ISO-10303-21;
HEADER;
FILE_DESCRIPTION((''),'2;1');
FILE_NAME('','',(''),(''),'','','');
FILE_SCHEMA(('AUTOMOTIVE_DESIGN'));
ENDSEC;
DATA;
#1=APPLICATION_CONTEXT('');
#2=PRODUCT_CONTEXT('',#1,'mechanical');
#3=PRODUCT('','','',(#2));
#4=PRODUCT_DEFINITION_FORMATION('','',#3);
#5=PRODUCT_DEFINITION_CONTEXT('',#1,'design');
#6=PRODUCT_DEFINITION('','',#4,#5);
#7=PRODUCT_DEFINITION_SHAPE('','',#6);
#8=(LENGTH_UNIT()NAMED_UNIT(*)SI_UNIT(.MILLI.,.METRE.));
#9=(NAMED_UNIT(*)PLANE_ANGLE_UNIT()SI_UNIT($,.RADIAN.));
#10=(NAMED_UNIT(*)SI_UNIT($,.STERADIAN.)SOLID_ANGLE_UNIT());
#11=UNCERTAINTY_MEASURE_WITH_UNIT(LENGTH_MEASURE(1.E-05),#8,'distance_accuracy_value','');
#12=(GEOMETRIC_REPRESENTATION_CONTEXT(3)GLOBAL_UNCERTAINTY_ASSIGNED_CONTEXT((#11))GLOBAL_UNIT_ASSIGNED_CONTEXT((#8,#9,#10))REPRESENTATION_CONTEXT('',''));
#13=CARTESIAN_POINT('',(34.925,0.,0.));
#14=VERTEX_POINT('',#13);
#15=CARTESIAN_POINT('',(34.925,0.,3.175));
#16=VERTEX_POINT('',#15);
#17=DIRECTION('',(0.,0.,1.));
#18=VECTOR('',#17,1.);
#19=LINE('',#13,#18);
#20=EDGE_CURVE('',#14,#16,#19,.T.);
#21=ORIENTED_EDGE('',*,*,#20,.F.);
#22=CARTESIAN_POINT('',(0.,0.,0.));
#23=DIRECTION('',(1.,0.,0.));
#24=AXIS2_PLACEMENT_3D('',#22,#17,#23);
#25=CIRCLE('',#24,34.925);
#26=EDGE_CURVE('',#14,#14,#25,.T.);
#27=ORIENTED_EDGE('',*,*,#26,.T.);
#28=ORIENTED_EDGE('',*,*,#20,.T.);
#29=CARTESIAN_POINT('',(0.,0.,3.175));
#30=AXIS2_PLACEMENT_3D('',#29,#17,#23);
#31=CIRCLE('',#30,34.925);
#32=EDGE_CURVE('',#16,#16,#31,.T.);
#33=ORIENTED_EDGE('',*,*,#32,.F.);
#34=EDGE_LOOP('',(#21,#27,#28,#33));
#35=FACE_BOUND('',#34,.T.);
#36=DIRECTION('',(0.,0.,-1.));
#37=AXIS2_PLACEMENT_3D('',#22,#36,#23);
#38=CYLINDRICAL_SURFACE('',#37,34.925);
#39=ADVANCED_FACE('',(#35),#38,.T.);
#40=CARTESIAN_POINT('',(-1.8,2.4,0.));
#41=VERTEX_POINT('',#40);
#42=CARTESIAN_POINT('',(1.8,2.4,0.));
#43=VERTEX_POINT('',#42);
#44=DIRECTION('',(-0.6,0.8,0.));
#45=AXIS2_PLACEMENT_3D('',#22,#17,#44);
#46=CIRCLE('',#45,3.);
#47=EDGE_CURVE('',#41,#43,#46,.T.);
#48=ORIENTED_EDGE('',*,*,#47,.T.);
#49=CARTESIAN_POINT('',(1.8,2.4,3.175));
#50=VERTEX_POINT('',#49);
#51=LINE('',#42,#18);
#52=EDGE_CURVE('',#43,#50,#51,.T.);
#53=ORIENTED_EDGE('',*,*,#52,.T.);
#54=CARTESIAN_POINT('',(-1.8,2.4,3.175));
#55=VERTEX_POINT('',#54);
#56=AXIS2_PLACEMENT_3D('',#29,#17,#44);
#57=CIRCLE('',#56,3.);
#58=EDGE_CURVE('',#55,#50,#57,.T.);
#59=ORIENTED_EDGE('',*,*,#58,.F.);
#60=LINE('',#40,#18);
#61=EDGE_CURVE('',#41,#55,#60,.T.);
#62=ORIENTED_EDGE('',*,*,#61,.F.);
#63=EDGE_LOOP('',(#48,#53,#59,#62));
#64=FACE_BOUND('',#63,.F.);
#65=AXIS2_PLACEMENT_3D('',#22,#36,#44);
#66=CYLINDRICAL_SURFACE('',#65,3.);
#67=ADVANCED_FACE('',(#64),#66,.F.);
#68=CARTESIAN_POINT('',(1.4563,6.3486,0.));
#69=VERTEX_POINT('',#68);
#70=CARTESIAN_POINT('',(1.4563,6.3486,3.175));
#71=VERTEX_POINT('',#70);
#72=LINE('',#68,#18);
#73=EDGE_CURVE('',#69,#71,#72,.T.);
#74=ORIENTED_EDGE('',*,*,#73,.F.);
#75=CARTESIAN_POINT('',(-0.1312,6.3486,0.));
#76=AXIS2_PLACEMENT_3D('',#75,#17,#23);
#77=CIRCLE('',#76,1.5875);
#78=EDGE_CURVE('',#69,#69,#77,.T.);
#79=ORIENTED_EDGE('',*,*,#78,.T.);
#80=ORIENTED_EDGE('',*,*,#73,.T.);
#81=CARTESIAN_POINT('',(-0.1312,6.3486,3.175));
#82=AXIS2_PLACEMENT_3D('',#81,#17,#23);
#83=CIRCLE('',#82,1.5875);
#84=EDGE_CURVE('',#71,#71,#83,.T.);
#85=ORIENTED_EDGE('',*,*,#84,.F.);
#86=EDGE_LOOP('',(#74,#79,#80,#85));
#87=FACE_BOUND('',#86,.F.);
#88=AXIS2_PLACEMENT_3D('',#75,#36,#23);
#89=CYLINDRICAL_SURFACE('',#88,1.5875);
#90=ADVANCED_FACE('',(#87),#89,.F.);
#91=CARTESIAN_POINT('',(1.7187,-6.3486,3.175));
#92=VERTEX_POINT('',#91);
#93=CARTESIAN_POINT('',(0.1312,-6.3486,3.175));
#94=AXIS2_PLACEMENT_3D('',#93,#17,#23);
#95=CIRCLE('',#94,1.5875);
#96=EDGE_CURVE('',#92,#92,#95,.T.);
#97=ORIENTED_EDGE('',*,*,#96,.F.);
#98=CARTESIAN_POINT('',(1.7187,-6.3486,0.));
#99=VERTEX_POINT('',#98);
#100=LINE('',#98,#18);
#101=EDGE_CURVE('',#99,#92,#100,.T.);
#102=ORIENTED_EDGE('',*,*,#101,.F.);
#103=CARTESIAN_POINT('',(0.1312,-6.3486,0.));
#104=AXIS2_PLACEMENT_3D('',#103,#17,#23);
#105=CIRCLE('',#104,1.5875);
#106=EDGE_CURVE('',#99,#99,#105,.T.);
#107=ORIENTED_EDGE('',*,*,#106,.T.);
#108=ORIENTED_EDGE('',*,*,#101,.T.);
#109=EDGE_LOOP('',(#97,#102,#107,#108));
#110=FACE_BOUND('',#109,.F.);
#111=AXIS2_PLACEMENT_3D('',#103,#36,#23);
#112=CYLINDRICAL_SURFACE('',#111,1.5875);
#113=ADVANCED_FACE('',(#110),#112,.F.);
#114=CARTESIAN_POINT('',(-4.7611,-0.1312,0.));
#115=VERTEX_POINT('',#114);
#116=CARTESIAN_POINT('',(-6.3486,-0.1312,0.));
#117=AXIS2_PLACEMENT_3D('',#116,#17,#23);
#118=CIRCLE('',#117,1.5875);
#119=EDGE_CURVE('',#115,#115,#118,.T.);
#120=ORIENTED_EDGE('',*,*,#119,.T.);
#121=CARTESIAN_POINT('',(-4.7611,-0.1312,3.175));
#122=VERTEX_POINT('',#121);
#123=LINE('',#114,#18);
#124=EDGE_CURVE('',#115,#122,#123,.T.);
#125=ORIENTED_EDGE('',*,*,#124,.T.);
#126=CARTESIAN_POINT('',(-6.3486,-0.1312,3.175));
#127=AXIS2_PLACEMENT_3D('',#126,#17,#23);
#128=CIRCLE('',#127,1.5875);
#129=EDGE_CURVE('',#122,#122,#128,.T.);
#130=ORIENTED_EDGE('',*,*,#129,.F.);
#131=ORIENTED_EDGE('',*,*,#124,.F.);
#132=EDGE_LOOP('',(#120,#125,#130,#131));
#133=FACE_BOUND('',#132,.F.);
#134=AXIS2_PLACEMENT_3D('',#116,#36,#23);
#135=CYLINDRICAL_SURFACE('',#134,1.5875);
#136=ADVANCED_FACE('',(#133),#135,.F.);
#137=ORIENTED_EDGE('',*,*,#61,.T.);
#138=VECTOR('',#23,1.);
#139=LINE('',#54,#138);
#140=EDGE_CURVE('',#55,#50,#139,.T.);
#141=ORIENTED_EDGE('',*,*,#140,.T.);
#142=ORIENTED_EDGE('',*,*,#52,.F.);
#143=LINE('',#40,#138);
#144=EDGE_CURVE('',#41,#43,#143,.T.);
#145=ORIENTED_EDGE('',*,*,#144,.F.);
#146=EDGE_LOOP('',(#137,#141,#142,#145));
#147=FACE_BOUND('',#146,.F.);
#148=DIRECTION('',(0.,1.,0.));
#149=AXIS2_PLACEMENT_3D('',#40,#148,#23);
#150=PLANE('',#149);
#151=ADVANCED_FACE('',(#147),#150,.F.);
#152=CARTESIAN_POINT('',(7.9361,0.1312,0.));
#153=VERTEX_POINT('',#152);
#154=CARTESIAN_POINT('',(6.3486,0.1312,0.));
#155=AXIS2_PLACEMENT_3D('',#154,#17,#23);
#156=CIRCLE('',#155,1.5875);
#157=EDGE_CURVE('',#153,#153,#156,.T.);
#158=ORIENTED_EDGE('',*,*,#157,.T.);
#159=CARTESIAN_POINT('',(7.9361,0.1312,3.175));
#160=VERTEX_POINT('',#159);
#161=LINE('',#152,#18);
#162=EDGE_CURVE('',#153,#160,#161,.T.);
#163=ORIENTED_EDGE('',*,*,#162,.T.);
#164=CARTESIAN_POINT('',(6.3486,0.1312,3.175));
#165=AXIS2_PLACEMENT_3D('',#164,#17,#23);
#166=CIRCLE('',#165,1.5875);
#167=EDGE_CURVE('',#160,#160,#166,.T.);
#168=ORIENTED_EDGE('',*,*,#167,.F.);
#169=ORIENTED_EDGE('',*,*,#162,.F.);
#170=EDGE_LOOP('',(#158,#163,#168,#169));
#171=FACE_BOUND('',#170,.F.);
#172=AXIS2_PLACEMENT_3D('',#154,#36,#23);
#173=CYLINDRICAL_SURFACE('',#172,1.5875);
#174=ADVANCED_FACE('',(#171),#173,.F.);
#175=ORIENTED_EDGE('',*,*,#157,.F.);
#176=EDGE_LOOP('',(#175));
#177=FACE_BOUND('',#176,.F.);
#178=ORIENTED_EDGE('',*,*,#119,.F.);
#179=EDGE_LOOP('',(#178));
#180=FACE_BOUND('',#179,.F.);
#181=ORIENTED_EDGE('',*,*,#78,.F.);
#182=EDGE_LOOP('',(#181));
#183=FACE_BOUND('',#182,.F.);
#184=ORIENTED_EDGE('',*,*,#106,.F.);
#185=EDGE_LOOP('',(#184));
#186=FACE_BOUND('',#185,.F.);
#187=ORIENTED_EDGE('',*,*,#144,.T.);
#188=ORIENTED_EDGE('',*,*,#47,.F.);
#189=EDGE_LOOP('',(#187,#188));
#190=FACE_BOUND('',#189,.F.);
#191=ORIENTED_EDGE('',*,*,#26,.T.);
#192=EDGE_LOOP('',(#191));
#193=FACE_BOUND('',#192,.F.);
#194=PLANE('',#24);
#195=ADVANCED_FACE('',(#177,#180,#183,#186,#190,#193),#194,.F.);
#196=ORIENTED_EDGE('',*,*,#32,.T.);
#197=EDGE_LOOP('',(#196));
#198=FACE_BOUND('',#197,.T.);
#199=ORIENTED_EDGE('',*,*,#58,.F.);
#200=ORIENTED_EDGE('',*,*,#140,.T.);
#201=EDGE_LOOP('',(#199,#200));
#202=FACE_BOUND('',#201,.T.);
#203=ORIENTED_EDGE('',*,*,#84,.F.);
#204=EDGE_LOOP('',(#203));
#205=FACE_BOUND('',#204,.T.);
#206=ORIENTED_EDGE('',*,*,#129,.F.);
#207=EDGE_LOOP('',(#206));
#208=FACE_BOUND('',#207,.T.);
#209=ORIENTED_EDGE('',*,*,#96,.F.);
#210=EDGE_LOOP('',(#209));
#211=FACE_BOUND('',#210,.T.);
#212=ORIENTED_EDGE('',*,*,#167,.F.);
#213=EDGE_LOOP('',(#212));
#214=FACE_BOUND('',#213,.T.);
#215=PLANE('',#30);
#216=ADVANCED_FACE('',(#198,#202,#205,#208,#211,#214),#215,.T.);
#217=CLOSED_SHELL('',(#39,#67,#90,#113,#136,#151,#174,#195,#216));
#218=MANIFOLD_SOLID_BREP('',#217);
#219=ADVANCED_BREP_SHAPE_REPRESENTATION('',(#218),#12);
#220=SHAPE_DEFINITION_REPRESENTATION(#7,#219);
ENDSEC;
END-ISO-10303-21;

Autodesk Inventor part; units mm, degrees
ref_plane "YZ Plane" through (0, 0, 0) normal (1, 0, 0) x (0, 1, 0)
ref_plane "XZ Plane" through (0, 0, 0) normal (0, 1, 0) x (-1, 0, 0)
ref_plane "XY Plane" through (0, 0, 0) normal (0, 0, 1) x (1, 0, 0)
ref_plane "Work Plane1" through (0, 0, 0) normal (0, 0, 1) x (1, 0, 0)
sketch "Sketch1" plane through (0, 0, 0) normal (0, 0, 1) x (1, 0, 0)
  circle A0 centre (-0.1312, 6.3486) radius 1.5875
  circle A1 centre (6.3486, 0.1312) radius 1.5875
  circle A2 centre (0.1312, -6.3486) radius 1.5875
  circle A3 centre (-6.3486, -0.1312) radius 1.5875
  arc A4 (-1.8, 2.4) -> (1.8, 2.4) centre (0, 0) ccw
  arc A5 (-10.2062, 24.6399) -> (-9.5905, 18.6316) centre (10.2722, 23.7027) ccw
  arc A6 (-9.5905, 18.6316) -> (-11.0963, 17.7759) centre (0, 0) ccw
  arc A7 (-11.0963, 17.7759) -> (-15.9426, 21.3804) centre (-25.6201, 3.3086) ccw
  arc A8 (-15.9426, 21.3804) -> (-17.6537, 19.9909) centre (0, 0) ccw
  arc A9 (-17.6537, 19.9909) -> (-15.1205, 14.508) centre (2.0194, 25.7538) ccw
  arc A10 (-15.1205, 14.508) -> (-16.2669, 13.2098) centre (0, 0) ccw
  arc A11 (-16.2669, 13.2098) -> (-22.021, 15.0454) centre (-25.3062, -5.1895) ccw
  arc A12 (-22.021, 15.0454) -> (-23.1882, 13.1756) centre (0, 0) ccw
  arc A13 (-23.1882, 13.1756) -> (-19.012, 8.8123) centre (-6.4522, 25.0141) ccw
  arc A14 (-19.012, 8.8123) -> (-19.6747, 7.2122) centre (0, 0) ccw
  arc A15 (-19.6747, 7.2122) -> (-25.7131, 7.08) centre (-22.2501, -13.1252) ccw
  arc A16 (-25.7131, 7.08) -> (-26.2099, 4.9325) centre (0, 0) ccw
  arc A17 (-26.2099, 4.9325) -> (-20.8432, 2.1617) centre (-14.2247, 21.5637) ccw
  arc A18 (-20.8432, 2.1617) -> (-20.9505, 0.4331) centre (0, 0) ccw
  arc A19 (-20.9505, 0.4331) -> (-26.6187, -1.6526) centre (-16.7827, -19.6386) ccw
  arc A20 (-26.6187, -1.6526) -> (-26.3914, -3.8451) centre (0, 0) ccw
  arc A21 (-26.3914, -3.8451) -> (-20.4158, -4.7232) centre (-20.4557, 15.7766) ccw
  arc A22 (-20.4158, -4.7232) -> (-19.956, -6.393) centre (0, 0) ccw
  arc A23 (-19.956, -6.393) -> (-24.6399, -10.2062) centre (-9.4967, -24.0239) ccw
  arc A24 (-24.6399, -10.2062) -> (-23.7129, -12.2061) centre (0, 0) ccw
  arc A25 (-23.7129, -12.2061) -> (-17.7759, -11.0963) centre (-24.47, 8.2798) ccw
  arc A26 (-17.7759, -11.0963) -> (-16.7989, -12.5263) centre (0, 0) ccw
  arc A27 (-16.7989, -12.5263) -> (-19.9909, -17.6537) centre (-1.1816, -25.8058) ccw
  arc A28 (-19.9909, -17.6537) -> (-18.4648, -19.2443) centre (0, 0) ccw
  arc A29 (-18.4648, -19.2443) -> (-13.2098, -16.2669) centre (-25.8326, -0.1142) ccw
  arc A30 (-13.2098, -16.2669) -> (-11.8214, -17.3022) centre (0, 0) ccw
  arc A31 (-11.8214, -17.3022) -> (-13.1756, -23.1882) centre (7.2615, -24.7913) ccw
  arc A32 (-13.1756, -23.1882) -> (-11.2157, -24.197) centre (0, 0) ccw
  arc A33 (-11.2157, -24.197) -> (-7.2122, -19.6747) centre (-24.3958, -8.4958) ccw
  arc A34 (-7.2122, -19.6747) -> (-5.5629, -20.2031) centre (0, 0) ccw
  arc A35 (-5.5629, -20.2031) -> (-4.9325, -26.2099) centre (14.9178, -21.0902) ccw
  arc A36 (-4.9325, -26.2099) -> (-2.7512, -26.5277) centre (0, 0) ccw
  arc A37 (-2.7512, -26.5277) -> (-0.4331, -20.9505) centre (-20.3154, -15.9568) ccw
  arc A38 (-0.4331, -20.9505) -> (1.2985, -20.9147) centre (0, 0) ccw
  arc A39 (1.2985, -20.9147) -> (3.8451, -26.3914) centre (20.9575, -15.1037) ccw
  arc A40 (3.8451, -26.3914) -> (6.0114, -25.9837) centre (0, 0) ccw
  arc A41 (6.0114, -25.9837) -> (6.393, -19.956) centre (-14.0335, -21.6886) ccw
  arc A42 (6.393, -19.956) -> (8.0191, -19.3599) centre (0, 0) ccw
  arc A43 (8.0191, -19.3599) -> (12.2061, -23.7129) centre (24.7261, -7.4804) ccw
  arc A44 (12.2061, -23.7129) -> (14.1226, -22.6239) centre (0, 0) ccw
  arc A45 (14.1226, -22.6239) -> (12.5263, -16.7989) centre (-6.2308, -25.0702) ccw
  arc A46 (12.5263, -16.7989) -> (13.8708, -15.7071) centre (0, 0) ccw
  arc A47 (13.8708, -15.7071) -> (19.2443, -18.4648) centre (25.8152, 0.9534) ccw
  arc A48 (19.2443, -18.4648) -> (20.7033, -16.8125) centre (0, 0) ccw
  arc A49 (20.7033, -16.8125) -> (17.3022, -11.8214) centre (2.2471, -25.7349) ccw
  arc A50 (17.3022, -11.8214) -> (18.2193, -10.3522) centre (0, 0) ccw
  arc A51 (18.2193, -10.3522) -> (24.197, -11.2157) centre (24.1069, 9.284) ccw
  arc A52 (24.197, -11.2157) -> (25.0406, -9.1792) centre (0, 0) ccw
  arc A53 (25.0406, -9.1792) -> (20.2031, -5.5629) centre (10.4814, -23.6109) ccw
  arc A54 (20.2031, -5.5629) -> (20.5935, -3.8755) centre (0, 0) ccw
  arc A55 (20.5935, -3.8755) -> (26.5277, -2.7512) centre (19.7863, 16.6084) ccw
  arc A56 (26.5277, -2.7512) -> (26.6643, -0.5512) centre (0, 0) ccw
  arc A57 (26.6643, -0.5512) -> (20.9147, 1.2985) centre (17.58, -18.9283) ccw
  arc A58 (20.9147, 1.2985) -> (20.7361, 3.0212) centre (0, 0) ccw
  arc A59 (20.7361, 3.0212) -> (25.9837, 6.0114) centre (13.3214, 22.1331) ccw
  arc A60 (25.9837, 6.0114) -> (25.3985, 8.1366) centre (0, 0) ccw
  arc A61 (25.3985, 8.1366) -> (19.3599, 8.0191) centre (22.7734, -12.1945) ccw
  arc A62 (19.3599, 8.0191) -> (18.6316, 9.5905) centre (0, 0) ccw
  arc A63 (18.6316, 9.5905) -> (22.6239, 14.1226) centre (5.413, 25.2594) ccw
  arc A64 (22.6239, 14.1226) -> (21.3804, 15.9426) centre (0, 0) ccw
  arc A65 (21.3804, 15.9426) -> (15.7071, 13.8708) centre (25.4991, -4.1393) ccw
  arc A66 (15.7071, 13.8708) -> (14.508, 15.1205) centre (0, 0) ccw
  arc A67 (14.508, 15.1205) -> (16.8125, 20.7033) centre (-3.082, 25.6483) ccw
  arc A68 (16.8125, 20.7033) -> (15.0454, 22.021) centre (0, 0) ccw
  arc A69 (15.0454, 22.021) -> (10.3522, 18.2193) centre (25.4615, 4.3646) ccw
  arc A70 (10.3522, 18.2193) -> (8.8123, 19.012) centre (0, 0) ccw
  arc A71 (8.8123, 19.012) -> (9.1792, 25.0406) centre (-11.243, 23.2579) ccw
  arc A72 (9.1792, 25.0406) -> (7.08, 25.7131) centre (0, 0) ccw
  arc A73 (7.08, 25.7131) -> (3.8755, 20.5935) centre (22.6647, 12.3954) ccw
  arc A74 (3.8755, 20.5935) -> (2.1617, 20.8432) centre (0, 0) ccw
  arc A75 (2.1617, 20.8432) -> (0.5512, 26.6643) centre (-18.1856, 18.3472) ccw
  arc A76 (0.5512, 26.6643) -> (-1.6526, 26.6187) centre (0, 0) ccw
  arc A77 (-1.6526, 26.6187) -> (-3.0212, 20.7361) centre (17.4119, 19.083) ccw
  arc A78 (-3.0212, 20.7361) -> (-4.7232, 20.4158) centre (0, 0) ccw
  arc A79 (-4.7232, 20.4158) -> (-8.1366, 25.3985) centre (-23.1576, 11.4482) ccw
  arc A80 (-8.1366, 25.3985) -> (-10.2062, 24.6399) centre (0, 0) ccw
  circle A81 centre (0, 0) radius 34.925
  line L0 (-3.1504, 2.4) -> (-1.8, 2.4)
  line L1 (1.8, 2.4) -> (3.3261, 2.4)
  line L2 (-1.8, 2.4) -> (1.8, 2.4)
  point P0 (0.0879, -3)
  dimension "d0" = 69.85
  dimension "d3" = 6
  dimension "d4" = 5.4
extrude "Extrusion1" add sketch "Sketch1" along normal blind 3.175 contours A80 A79 A78 A77 A76 A75 A74 A73 A72 A71 A70 A69 A68 A67 A66 A65 A64 A63 A62 A61 A60 A59 A58 A57 A56 A55 A54 A53 A52 A51 A50 A49 A48 A47 A46 A45 A44 A43 A42 A41 A40 A39 A38 A37 A36 A35 A34 A33 A32 A31 A30 A29 A28 A27 A26 A25 A24 A23 A22 A21 A20 A19 A18 A17 A16 A15 A14 A13 A12 A11 A10 A9 A8 A7 A6 A5 | A81
properties part number "gearGuideRings"
